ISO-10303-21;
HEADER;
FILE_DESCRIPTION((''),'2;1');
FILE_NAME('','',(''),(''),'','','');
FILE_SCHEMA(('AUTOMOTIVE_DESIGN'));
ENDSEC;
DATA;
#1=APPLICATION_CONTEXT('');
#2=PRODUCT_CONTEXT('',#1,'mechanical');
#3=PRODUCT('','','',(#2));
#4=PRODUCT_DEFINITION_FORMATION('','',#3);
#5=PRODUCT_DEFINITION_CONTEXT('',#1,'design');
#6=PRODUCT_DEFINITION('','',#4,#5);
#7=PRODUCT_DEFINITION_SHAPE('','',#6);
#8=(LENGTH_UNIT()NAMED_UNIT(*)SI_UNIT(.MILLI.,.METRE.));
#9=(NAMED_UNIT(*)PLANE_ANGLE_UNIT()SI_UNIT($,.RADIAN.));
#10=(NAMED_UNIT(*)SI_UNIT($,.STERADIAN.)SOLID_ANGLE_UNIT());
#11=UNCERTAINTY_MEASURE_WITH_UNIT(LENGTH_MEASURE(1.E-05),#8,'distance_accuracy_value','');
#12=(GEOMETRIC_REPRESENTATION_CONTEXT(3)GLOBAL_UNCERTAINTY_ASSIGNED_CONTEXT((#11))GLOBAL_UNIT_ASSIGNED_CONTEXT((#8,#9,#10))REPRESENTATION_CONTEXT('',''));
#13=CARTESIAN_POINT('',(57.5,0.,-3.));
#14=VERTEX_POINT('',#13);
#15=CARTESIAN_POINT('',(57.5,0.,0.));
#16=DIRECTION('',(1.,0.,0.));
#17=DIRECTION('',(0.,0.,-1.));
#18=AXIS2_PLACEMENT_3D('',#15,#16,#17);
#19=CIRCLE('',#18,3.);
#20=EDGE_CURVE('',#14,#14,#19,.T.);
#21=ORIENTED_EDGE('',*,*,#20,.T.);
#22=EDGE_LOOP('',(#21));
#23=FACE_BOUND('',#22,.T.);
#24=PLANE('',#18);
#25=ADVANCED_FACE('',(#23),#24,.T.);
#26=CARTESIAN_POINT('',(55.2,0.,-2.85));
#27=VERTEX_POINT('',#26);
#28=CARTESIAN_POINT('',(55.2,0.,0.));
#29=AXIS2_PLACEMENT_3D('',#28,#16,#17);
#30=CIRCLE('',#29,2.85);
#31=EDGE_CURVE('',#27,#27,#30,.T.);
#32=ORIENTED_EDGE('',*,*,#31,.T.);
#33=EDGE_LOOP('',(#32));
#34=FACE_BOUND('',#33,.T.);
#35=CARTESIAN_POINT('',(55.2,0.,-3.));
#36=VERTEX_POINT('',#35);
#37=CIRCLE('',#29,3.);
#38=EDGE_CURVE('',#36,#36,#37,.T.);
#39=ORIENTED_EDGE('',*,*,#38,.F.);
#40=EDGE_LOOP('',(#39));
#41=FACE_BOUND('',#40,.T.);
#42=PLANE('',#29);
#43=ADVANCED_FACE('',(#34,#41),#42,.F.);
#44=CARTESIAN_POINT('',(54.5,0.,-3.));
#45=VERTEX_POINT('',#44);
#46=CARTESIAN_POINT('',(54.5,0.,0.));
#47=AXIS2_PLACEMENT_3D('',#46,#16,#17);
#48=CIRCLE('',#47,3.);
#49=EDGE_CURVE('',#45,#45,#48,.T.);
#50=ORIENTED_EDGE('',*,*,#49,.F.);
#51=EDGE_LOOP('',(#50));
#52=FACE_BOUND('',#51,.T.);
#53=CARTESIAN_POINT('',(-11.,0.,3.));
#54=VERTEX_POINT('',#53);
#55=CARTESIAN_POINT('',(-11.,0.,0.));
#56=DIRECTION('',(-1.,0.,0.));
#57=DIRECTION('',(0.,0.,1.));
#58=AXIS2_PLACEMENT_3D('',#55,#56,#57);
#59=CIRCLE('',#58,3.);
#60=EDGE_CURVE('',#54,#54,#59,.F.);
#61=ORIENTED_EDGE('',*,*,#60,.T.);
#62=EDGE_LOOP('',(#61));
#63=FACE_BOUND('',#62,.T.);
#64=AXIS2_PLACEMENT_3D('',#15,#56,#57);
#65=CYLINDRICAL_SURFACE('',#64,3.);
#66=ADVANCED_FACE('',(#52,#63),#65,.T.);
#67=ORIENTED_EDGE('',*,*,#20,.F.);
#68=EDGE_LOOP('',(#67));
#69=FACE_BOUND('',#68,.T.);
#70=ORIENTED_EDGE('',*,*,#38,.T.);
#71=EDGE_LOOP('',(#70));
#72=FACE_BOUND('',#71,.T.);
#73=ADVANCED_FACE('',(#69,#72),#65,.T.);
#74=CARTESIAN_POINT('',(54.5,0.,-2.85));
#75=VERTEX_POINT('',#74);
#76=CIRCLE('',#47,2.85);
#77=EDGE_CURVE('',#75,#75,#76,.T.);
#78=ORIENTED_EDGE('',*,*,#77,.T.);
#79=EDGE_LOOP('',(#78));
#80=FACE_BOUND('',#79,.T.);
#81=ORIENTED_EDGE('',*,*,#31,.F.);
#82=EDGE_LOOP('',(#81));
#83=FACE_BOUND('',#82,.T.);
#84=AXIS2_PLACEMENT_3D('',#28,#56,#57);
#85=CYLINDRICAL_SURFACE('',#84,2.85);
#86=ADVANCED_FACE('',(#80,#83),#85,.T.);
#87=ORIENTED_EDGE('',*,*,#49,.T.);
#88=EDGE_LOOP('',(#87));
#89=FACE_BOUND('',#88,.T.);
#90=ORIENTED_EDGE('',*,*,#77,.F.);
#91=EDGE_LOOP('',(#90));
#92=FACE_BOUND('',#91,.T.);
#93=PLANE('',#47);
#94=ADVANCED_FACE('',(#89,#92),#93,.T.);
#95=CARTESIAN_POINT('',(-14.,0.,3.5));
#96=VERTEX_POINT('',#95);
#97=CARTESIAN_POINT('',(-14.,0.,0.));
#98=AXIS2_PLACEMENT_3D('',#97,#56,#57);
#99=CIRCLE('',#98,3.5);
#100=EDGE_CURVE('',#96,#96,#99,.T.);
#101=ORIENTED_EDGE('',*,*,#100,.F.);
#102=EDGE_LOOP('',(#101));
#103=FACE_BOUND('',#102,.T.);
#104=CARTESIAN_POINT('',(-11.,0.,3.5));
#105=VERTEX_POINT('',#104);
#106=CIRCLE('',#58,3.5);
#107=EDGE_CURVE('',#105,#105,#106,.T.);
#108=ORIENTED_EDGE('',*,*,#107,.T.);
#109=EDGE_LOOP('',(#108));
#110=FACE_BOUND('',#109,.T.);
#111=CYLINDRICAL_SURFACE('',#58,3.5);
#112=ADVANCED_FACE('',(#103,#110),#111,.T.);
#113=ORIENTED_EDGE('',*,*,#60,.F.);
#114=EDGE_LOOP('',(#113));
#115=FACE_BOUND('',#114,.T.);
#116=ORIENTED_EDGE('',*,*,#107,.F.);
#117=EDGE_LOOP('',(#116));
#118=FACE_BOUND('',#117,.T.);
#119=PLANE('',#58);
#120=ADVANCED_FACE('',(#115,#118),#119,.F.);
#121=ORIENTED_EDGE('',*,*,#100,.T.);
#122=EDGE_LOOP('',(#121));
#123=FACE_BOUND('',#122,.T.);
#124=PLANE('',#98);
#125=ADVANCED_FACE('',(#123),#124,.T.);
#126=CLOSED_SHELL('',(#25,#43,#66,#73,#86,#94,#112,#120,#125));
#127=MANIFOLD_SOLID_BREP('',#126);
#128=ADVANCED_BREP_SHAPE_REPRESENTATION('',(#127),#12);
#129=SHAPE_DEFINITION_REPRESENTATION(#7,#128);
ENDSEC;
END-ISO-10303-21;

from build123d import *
from build123d.topology import SkipClean

# Parameters (mm, degrees)
SKETCH_2_R          = 3
EXTRUDE_1_DEPTH     = 4
EXTRUDE_2_DEPTH     = 2.5
SKETCH_5_R          = 2.5
EXTRUDE_3_DEPTH     = 9
MIRROR_START        = 15.5
MIRROR_1_DEPTH      = 0.381197772
MIRROR_START_2      = 15.881197772
MIRROR_1_2_DEPTH    = 4.618802228
EXTRUDE_4_DEPTH     = 5
SKETCH_10_R         = 2.5
EXTRUDE_5_DEPTH     = 6
SKETCH_11_R         = 3
EXTRUDE_6_DEPTH     = 5.5
EXTRUDE_START       = 10
SKETCH_12_R         = 3
EXTRUDE_8_DEPTH     = 10
SKETCH_13_R         = 3
EXTRUDE_9_DEPTH     = 10
SKETCH_14_OUTSIDE_W = 32.048
SKETCH_14_OUTSIDE_H = 35.048
SKETCH_14_OUTSIDE_R = 3
CUT_EXTRUDE_2_DEPTH = 59.352377883
SKETCH_15_R         = 3
EXTRUDE_10_DEPTH    = 29.5
EXTRUDE_11_DEPTH    = 26.5
SKETCH_18_R         = 3.5
EXTRUDE_12_DEPTH    = 3
CUT_EXTRUDE_START   = -3
SKETCH_19_R         = 3
SKETCH_19_R_2       = 2.85
CUT_EXTRUDE_3_DEPTH = 0.7


with BuildPart() as part:
    # 草图2 → 凸台-拉伸1 (new, symmetric)
    with BuildSketch(Plane(origin=(0, 0, 0), x_dir=(0, 0, -1), z_dir=(1, 0, 0))):
        Circle(SKETCH_2_R)
    extrude_1 = extrude(amount=EXTRUDE_1_DEPTH, both=True)

    # 草图3 → 凸台-拉伸2 (add, symmetric)
    with BuildSketch(Plane(origin=(4, 0, 0), x_dir=(0, 0, -1), z_dir=(1, 0, 0))):
        with BuildLine():
            Line((5, 0), (5, -8))
            ThreePointArc((5, -8), (0, -13), (-5, -8))
            Line((-5, -8), (-5, 0))
            ThreePointArc((-5, 0), (0, 5), (5, 0))
        make_face()
    extrude(amount=EXTRUDE_2_DEPTH, both=True)

    # 切除-旋转1: read off the stored shape, not the designer's step
    # 切除-旋转1 outline → 切除-旋转1 (revolve, cut)
    with BuildSketch(Plane.YX):
        Polygon((13.0002322, 6.118936215), (4.99999958, 1.499999757), (13.0002322, 1.499999757), align=None)
    revolve(axis=Axis((0, 0, 0), (1, 0, 0)), mode=Mode.SUBTRACT)

    # 草图5 → 凸台-拉伸3 (add)
    with BuildSketch(Plane(origin=(6.5, 0, 0), x_dir=(0, 0, -1), z_dir=(1, 0, 0))):
        with Locations((0, -8)):
            Circle(SKETCH_5_R)
    extrude(amount=EXTRUDE_3_DEPTH)

    # 镜向1: read off the stored shape, not the designer's step
    # 镜向1 outline → 镜向1 (add)
    with BuildSketch(Plane.YZ.offset(MIRROR_START)):
        with BuildLine():
            Line((-8, -5), (0, -5))
            ThreePointArc((0, -5), (5, 0), (0, 5))
            Line((0, 5), (-7.999999997, 5))
            ThreePointArc((-7.999999997, 5), (-13, 2e-09), (-8, -5))
        make_face()
    extrude(amount=MIRROR_1_DEPTH)

    # Mirror 1 2 outline → Mirror 1 2 (add)
    with BuildSketch(Plane.YZ.offset(MIRROR_START_2)):
        with BuildLine():
            Line((-8, -5), (0, -5))
            ThreePointArc((0, -5), (5, 0), (0, 5))
            Line((0, 5), (-7.999999997, 5))
            ThreePointArc((-7.999999997, 5), (-13, 2e-09), (-8, -5))
        make_face()
    extrude(amount=MIRROR_1_2_DEPTH)

    # Mirror 1 3 outline → Mirror 1 3 (revolve, cut)
    with BuildSketch(Plane.YX):
        Polygon((13.0002322, 20.500000243), (4.99999958, 20.500000243), (13.0002322, 15.881063785), align=None)
    revolve(axis=Axis((0, 0, 0), (1, 0, 0)), mode=Mode.SUBTRACT)

    # 镜向2: 凸台-拉伸1 across plane
    add(extrude_1.mirror(Plane(origin=(11, 0, 0), x_dir=(0, 0, 1), z_dir=(1, 0, 0))))

    # 草图6 → 凸台-拉伸4 (add)
    with BuildSketch(Plane(origin=(26, 0, 0), x_dir=(0, 0, -1), z_dir=(1, 0, 0))):
        with BuildLine():
            Line((0, -5), (-5, -5))
            ThreePointArc((-5, -5), (-10, 0), (-5, 5))
            Line((-5, 5), (0, 5))
            ThreePointArc((0, 5), (5, 0), (0, -5))
        make_face()
    extrude_4 = extrude(amount=EXTRUDE_4_DEPTH)

    # 切除-旋转2: read off the stored shape, not the designer's step
    # 切除-旋转2 outline → 切除-旋转2 (revolve, cut)
    with BuildSketch(Plane.YX):
        Polygon((10.000264544, 30.195720135), (5, 26), (10.000264544, 26), align=None)
    cut_revolve_2 = revolve(axis=Axis((0, 0, 0), (1, 0, 0)), mode=Mode.SUBTRACT)

    # 草图10 → 凸台-拉伸5 (add)
    with BuildSketch(Plane(origin=(31, 0, 0), x_dir=(0, 0, -1), z_dir=(1, 0, 0))):
        with Locations((-5, 0)):
            Circle(SKETCH_10_R)
    extrude(amount=EXTRUDE_5_DEPTH)

    # 镜向3: 凸台-拉伸4, 切除-旋转2 across plane
    add(extrude_4.mirror(Plane(origin=(34, 0, 0), x_dir=(0, 0, 1), z_dir=(1, 0, 0))))
    add(cut_revolve_2.mirror(Plane(origin=(34, 0, 0), x_dir=(0, 0, 1), z_dir=(1, 0, 0))), mode=Mode.SUBTRACT)

    # 草图11 → 凸台-拉伸6 (add)
    with BuildSketch(Plane(origin=(42, 0, 0), x_dir=(0, 0, -1), z_dir=(1, 0, 0))):
        Circle(SKETCH_11_R)
    extrude(amount=EXTRUDE_6_DEPTH)

    # 草图12 → 凸台-拉伸8 (add)
    with BuildSketch(Plane.ZY.offset(4).offset(EXTRUDE_START)):
        Circle(SKETCH_12_R)
    extrude(amount=-EXTRUDE_8_DEPTH)

    # 草图13 → 凸台-拉伸9 (add)
    with BuildSketch(Plane(origin=(47.5, 0, 0), x_dir=(0, 0, -1), z_dir=(1, 0, 0))):
        with Locations(Location((0, 0, 0), (0, 0, 180))):
            Circle(SKETCH_13_R)
    extrude(amount=EXTRUDE_9_DEPTH)

    # 草图14 outside → 切除-拉伸2 (cut, through all)
    with SkipClean():  # the faces are left unmerged after this step: merging them gives an invalid solid
        with BuildSketch(Plane.ZY.offset(-1.5)):
            with Locations((2.5, -4)):
                Rectangle(SKETCH_14_OUTSIDE_W, SKETCH_14_OUTSIDE_H)
            Circle(SKETCH_14_OUTSIDE_R, mode=Mode.SUBTRACT)
        extrude(amount=-CUT_EXTRUDE_2_DEPTH, mode=Mode.SUBTRACT)


with BuildPart() as cut_extrude_2_piece_1:
    # of the separate pieces the step leaves, piece 1, a body of its own (cut_extrude_2_pieces)
    add(part.part.solids().sort_by_distance((37, -1.139901312, 2.775))[0])



with BuildPart() as cut_extrude_2_piece_2:
    # of the separate pieces the step leaves, piece 2, a body of its own (cut_extrude_2_pieces)
    add(part.part.solids().sort_by_distance((6.5, 0, 3))[0])


with BuildPart() as cut_extrude_2_piece_1_1:
    with SkipClean():  # the faces are left unmerged after this step: merging them gives an invalid solid
        add(cut_extrude_2_piece_1.part)

        add(cut_extrude_2_piece_2.part)  # 凸台-拉伸10 merges 切除-拉伸2 piece 2
        # 草图15 → 凸台-拉伸10 (add)
        with BuildSketch(Plane.ZY.offset(-15.5)):
            Circle(SKETCH_15_R)
        extrude(amount=EXTRUDE_10_DEPTH)

    # 草图16 → 凸台-拉伸11 (add)
    with BuildSketch(Plane(origin=(31, 0, 0), x_dir=(0, 0, -1), z_dir=(1, 0, 0))):
        with BuildLine():
            ThreePointArc((-2.775, -1.139901312), (-2.5, 0), (-2.775, 1.139901312))
            ThreePointArc((-2.775, 1.139901312), (3, 0), (-2.775, -1.139901312))
        make_face()
    extrude(amount=EXTRUDE_11_DEPTH)

    # 草图18 → 凸台-拉伸12 (add)
    with BuildSketch(Plane.ZY.offset(14)):
        Circle(SKETCH_18_R)
    extrude(amount=-EXTRUDE_12_DEPTH)

    # 草图19 → 切除-拉伸3 (cut)
    with BuildSketch(Plane(origin=(57.5, 0, 0), x_dir=(0, 0, -1), z_dir=(1, 0, 0)).offset(CUT_EXTRUDE_START)):
        with Locations(Location((0, 0, 0), (0, 0, 180))):
            Circle(SKETCH_19_R)
        Circle(SKETCH_19_R_2, mode=Mode.SUBTRACT)
    extrude(amount=CUT_EXTRUDE_3_DEPTH, mode=Mode.SUBTRACT)


solid = cut_extrude_2_piece_1_1.part
